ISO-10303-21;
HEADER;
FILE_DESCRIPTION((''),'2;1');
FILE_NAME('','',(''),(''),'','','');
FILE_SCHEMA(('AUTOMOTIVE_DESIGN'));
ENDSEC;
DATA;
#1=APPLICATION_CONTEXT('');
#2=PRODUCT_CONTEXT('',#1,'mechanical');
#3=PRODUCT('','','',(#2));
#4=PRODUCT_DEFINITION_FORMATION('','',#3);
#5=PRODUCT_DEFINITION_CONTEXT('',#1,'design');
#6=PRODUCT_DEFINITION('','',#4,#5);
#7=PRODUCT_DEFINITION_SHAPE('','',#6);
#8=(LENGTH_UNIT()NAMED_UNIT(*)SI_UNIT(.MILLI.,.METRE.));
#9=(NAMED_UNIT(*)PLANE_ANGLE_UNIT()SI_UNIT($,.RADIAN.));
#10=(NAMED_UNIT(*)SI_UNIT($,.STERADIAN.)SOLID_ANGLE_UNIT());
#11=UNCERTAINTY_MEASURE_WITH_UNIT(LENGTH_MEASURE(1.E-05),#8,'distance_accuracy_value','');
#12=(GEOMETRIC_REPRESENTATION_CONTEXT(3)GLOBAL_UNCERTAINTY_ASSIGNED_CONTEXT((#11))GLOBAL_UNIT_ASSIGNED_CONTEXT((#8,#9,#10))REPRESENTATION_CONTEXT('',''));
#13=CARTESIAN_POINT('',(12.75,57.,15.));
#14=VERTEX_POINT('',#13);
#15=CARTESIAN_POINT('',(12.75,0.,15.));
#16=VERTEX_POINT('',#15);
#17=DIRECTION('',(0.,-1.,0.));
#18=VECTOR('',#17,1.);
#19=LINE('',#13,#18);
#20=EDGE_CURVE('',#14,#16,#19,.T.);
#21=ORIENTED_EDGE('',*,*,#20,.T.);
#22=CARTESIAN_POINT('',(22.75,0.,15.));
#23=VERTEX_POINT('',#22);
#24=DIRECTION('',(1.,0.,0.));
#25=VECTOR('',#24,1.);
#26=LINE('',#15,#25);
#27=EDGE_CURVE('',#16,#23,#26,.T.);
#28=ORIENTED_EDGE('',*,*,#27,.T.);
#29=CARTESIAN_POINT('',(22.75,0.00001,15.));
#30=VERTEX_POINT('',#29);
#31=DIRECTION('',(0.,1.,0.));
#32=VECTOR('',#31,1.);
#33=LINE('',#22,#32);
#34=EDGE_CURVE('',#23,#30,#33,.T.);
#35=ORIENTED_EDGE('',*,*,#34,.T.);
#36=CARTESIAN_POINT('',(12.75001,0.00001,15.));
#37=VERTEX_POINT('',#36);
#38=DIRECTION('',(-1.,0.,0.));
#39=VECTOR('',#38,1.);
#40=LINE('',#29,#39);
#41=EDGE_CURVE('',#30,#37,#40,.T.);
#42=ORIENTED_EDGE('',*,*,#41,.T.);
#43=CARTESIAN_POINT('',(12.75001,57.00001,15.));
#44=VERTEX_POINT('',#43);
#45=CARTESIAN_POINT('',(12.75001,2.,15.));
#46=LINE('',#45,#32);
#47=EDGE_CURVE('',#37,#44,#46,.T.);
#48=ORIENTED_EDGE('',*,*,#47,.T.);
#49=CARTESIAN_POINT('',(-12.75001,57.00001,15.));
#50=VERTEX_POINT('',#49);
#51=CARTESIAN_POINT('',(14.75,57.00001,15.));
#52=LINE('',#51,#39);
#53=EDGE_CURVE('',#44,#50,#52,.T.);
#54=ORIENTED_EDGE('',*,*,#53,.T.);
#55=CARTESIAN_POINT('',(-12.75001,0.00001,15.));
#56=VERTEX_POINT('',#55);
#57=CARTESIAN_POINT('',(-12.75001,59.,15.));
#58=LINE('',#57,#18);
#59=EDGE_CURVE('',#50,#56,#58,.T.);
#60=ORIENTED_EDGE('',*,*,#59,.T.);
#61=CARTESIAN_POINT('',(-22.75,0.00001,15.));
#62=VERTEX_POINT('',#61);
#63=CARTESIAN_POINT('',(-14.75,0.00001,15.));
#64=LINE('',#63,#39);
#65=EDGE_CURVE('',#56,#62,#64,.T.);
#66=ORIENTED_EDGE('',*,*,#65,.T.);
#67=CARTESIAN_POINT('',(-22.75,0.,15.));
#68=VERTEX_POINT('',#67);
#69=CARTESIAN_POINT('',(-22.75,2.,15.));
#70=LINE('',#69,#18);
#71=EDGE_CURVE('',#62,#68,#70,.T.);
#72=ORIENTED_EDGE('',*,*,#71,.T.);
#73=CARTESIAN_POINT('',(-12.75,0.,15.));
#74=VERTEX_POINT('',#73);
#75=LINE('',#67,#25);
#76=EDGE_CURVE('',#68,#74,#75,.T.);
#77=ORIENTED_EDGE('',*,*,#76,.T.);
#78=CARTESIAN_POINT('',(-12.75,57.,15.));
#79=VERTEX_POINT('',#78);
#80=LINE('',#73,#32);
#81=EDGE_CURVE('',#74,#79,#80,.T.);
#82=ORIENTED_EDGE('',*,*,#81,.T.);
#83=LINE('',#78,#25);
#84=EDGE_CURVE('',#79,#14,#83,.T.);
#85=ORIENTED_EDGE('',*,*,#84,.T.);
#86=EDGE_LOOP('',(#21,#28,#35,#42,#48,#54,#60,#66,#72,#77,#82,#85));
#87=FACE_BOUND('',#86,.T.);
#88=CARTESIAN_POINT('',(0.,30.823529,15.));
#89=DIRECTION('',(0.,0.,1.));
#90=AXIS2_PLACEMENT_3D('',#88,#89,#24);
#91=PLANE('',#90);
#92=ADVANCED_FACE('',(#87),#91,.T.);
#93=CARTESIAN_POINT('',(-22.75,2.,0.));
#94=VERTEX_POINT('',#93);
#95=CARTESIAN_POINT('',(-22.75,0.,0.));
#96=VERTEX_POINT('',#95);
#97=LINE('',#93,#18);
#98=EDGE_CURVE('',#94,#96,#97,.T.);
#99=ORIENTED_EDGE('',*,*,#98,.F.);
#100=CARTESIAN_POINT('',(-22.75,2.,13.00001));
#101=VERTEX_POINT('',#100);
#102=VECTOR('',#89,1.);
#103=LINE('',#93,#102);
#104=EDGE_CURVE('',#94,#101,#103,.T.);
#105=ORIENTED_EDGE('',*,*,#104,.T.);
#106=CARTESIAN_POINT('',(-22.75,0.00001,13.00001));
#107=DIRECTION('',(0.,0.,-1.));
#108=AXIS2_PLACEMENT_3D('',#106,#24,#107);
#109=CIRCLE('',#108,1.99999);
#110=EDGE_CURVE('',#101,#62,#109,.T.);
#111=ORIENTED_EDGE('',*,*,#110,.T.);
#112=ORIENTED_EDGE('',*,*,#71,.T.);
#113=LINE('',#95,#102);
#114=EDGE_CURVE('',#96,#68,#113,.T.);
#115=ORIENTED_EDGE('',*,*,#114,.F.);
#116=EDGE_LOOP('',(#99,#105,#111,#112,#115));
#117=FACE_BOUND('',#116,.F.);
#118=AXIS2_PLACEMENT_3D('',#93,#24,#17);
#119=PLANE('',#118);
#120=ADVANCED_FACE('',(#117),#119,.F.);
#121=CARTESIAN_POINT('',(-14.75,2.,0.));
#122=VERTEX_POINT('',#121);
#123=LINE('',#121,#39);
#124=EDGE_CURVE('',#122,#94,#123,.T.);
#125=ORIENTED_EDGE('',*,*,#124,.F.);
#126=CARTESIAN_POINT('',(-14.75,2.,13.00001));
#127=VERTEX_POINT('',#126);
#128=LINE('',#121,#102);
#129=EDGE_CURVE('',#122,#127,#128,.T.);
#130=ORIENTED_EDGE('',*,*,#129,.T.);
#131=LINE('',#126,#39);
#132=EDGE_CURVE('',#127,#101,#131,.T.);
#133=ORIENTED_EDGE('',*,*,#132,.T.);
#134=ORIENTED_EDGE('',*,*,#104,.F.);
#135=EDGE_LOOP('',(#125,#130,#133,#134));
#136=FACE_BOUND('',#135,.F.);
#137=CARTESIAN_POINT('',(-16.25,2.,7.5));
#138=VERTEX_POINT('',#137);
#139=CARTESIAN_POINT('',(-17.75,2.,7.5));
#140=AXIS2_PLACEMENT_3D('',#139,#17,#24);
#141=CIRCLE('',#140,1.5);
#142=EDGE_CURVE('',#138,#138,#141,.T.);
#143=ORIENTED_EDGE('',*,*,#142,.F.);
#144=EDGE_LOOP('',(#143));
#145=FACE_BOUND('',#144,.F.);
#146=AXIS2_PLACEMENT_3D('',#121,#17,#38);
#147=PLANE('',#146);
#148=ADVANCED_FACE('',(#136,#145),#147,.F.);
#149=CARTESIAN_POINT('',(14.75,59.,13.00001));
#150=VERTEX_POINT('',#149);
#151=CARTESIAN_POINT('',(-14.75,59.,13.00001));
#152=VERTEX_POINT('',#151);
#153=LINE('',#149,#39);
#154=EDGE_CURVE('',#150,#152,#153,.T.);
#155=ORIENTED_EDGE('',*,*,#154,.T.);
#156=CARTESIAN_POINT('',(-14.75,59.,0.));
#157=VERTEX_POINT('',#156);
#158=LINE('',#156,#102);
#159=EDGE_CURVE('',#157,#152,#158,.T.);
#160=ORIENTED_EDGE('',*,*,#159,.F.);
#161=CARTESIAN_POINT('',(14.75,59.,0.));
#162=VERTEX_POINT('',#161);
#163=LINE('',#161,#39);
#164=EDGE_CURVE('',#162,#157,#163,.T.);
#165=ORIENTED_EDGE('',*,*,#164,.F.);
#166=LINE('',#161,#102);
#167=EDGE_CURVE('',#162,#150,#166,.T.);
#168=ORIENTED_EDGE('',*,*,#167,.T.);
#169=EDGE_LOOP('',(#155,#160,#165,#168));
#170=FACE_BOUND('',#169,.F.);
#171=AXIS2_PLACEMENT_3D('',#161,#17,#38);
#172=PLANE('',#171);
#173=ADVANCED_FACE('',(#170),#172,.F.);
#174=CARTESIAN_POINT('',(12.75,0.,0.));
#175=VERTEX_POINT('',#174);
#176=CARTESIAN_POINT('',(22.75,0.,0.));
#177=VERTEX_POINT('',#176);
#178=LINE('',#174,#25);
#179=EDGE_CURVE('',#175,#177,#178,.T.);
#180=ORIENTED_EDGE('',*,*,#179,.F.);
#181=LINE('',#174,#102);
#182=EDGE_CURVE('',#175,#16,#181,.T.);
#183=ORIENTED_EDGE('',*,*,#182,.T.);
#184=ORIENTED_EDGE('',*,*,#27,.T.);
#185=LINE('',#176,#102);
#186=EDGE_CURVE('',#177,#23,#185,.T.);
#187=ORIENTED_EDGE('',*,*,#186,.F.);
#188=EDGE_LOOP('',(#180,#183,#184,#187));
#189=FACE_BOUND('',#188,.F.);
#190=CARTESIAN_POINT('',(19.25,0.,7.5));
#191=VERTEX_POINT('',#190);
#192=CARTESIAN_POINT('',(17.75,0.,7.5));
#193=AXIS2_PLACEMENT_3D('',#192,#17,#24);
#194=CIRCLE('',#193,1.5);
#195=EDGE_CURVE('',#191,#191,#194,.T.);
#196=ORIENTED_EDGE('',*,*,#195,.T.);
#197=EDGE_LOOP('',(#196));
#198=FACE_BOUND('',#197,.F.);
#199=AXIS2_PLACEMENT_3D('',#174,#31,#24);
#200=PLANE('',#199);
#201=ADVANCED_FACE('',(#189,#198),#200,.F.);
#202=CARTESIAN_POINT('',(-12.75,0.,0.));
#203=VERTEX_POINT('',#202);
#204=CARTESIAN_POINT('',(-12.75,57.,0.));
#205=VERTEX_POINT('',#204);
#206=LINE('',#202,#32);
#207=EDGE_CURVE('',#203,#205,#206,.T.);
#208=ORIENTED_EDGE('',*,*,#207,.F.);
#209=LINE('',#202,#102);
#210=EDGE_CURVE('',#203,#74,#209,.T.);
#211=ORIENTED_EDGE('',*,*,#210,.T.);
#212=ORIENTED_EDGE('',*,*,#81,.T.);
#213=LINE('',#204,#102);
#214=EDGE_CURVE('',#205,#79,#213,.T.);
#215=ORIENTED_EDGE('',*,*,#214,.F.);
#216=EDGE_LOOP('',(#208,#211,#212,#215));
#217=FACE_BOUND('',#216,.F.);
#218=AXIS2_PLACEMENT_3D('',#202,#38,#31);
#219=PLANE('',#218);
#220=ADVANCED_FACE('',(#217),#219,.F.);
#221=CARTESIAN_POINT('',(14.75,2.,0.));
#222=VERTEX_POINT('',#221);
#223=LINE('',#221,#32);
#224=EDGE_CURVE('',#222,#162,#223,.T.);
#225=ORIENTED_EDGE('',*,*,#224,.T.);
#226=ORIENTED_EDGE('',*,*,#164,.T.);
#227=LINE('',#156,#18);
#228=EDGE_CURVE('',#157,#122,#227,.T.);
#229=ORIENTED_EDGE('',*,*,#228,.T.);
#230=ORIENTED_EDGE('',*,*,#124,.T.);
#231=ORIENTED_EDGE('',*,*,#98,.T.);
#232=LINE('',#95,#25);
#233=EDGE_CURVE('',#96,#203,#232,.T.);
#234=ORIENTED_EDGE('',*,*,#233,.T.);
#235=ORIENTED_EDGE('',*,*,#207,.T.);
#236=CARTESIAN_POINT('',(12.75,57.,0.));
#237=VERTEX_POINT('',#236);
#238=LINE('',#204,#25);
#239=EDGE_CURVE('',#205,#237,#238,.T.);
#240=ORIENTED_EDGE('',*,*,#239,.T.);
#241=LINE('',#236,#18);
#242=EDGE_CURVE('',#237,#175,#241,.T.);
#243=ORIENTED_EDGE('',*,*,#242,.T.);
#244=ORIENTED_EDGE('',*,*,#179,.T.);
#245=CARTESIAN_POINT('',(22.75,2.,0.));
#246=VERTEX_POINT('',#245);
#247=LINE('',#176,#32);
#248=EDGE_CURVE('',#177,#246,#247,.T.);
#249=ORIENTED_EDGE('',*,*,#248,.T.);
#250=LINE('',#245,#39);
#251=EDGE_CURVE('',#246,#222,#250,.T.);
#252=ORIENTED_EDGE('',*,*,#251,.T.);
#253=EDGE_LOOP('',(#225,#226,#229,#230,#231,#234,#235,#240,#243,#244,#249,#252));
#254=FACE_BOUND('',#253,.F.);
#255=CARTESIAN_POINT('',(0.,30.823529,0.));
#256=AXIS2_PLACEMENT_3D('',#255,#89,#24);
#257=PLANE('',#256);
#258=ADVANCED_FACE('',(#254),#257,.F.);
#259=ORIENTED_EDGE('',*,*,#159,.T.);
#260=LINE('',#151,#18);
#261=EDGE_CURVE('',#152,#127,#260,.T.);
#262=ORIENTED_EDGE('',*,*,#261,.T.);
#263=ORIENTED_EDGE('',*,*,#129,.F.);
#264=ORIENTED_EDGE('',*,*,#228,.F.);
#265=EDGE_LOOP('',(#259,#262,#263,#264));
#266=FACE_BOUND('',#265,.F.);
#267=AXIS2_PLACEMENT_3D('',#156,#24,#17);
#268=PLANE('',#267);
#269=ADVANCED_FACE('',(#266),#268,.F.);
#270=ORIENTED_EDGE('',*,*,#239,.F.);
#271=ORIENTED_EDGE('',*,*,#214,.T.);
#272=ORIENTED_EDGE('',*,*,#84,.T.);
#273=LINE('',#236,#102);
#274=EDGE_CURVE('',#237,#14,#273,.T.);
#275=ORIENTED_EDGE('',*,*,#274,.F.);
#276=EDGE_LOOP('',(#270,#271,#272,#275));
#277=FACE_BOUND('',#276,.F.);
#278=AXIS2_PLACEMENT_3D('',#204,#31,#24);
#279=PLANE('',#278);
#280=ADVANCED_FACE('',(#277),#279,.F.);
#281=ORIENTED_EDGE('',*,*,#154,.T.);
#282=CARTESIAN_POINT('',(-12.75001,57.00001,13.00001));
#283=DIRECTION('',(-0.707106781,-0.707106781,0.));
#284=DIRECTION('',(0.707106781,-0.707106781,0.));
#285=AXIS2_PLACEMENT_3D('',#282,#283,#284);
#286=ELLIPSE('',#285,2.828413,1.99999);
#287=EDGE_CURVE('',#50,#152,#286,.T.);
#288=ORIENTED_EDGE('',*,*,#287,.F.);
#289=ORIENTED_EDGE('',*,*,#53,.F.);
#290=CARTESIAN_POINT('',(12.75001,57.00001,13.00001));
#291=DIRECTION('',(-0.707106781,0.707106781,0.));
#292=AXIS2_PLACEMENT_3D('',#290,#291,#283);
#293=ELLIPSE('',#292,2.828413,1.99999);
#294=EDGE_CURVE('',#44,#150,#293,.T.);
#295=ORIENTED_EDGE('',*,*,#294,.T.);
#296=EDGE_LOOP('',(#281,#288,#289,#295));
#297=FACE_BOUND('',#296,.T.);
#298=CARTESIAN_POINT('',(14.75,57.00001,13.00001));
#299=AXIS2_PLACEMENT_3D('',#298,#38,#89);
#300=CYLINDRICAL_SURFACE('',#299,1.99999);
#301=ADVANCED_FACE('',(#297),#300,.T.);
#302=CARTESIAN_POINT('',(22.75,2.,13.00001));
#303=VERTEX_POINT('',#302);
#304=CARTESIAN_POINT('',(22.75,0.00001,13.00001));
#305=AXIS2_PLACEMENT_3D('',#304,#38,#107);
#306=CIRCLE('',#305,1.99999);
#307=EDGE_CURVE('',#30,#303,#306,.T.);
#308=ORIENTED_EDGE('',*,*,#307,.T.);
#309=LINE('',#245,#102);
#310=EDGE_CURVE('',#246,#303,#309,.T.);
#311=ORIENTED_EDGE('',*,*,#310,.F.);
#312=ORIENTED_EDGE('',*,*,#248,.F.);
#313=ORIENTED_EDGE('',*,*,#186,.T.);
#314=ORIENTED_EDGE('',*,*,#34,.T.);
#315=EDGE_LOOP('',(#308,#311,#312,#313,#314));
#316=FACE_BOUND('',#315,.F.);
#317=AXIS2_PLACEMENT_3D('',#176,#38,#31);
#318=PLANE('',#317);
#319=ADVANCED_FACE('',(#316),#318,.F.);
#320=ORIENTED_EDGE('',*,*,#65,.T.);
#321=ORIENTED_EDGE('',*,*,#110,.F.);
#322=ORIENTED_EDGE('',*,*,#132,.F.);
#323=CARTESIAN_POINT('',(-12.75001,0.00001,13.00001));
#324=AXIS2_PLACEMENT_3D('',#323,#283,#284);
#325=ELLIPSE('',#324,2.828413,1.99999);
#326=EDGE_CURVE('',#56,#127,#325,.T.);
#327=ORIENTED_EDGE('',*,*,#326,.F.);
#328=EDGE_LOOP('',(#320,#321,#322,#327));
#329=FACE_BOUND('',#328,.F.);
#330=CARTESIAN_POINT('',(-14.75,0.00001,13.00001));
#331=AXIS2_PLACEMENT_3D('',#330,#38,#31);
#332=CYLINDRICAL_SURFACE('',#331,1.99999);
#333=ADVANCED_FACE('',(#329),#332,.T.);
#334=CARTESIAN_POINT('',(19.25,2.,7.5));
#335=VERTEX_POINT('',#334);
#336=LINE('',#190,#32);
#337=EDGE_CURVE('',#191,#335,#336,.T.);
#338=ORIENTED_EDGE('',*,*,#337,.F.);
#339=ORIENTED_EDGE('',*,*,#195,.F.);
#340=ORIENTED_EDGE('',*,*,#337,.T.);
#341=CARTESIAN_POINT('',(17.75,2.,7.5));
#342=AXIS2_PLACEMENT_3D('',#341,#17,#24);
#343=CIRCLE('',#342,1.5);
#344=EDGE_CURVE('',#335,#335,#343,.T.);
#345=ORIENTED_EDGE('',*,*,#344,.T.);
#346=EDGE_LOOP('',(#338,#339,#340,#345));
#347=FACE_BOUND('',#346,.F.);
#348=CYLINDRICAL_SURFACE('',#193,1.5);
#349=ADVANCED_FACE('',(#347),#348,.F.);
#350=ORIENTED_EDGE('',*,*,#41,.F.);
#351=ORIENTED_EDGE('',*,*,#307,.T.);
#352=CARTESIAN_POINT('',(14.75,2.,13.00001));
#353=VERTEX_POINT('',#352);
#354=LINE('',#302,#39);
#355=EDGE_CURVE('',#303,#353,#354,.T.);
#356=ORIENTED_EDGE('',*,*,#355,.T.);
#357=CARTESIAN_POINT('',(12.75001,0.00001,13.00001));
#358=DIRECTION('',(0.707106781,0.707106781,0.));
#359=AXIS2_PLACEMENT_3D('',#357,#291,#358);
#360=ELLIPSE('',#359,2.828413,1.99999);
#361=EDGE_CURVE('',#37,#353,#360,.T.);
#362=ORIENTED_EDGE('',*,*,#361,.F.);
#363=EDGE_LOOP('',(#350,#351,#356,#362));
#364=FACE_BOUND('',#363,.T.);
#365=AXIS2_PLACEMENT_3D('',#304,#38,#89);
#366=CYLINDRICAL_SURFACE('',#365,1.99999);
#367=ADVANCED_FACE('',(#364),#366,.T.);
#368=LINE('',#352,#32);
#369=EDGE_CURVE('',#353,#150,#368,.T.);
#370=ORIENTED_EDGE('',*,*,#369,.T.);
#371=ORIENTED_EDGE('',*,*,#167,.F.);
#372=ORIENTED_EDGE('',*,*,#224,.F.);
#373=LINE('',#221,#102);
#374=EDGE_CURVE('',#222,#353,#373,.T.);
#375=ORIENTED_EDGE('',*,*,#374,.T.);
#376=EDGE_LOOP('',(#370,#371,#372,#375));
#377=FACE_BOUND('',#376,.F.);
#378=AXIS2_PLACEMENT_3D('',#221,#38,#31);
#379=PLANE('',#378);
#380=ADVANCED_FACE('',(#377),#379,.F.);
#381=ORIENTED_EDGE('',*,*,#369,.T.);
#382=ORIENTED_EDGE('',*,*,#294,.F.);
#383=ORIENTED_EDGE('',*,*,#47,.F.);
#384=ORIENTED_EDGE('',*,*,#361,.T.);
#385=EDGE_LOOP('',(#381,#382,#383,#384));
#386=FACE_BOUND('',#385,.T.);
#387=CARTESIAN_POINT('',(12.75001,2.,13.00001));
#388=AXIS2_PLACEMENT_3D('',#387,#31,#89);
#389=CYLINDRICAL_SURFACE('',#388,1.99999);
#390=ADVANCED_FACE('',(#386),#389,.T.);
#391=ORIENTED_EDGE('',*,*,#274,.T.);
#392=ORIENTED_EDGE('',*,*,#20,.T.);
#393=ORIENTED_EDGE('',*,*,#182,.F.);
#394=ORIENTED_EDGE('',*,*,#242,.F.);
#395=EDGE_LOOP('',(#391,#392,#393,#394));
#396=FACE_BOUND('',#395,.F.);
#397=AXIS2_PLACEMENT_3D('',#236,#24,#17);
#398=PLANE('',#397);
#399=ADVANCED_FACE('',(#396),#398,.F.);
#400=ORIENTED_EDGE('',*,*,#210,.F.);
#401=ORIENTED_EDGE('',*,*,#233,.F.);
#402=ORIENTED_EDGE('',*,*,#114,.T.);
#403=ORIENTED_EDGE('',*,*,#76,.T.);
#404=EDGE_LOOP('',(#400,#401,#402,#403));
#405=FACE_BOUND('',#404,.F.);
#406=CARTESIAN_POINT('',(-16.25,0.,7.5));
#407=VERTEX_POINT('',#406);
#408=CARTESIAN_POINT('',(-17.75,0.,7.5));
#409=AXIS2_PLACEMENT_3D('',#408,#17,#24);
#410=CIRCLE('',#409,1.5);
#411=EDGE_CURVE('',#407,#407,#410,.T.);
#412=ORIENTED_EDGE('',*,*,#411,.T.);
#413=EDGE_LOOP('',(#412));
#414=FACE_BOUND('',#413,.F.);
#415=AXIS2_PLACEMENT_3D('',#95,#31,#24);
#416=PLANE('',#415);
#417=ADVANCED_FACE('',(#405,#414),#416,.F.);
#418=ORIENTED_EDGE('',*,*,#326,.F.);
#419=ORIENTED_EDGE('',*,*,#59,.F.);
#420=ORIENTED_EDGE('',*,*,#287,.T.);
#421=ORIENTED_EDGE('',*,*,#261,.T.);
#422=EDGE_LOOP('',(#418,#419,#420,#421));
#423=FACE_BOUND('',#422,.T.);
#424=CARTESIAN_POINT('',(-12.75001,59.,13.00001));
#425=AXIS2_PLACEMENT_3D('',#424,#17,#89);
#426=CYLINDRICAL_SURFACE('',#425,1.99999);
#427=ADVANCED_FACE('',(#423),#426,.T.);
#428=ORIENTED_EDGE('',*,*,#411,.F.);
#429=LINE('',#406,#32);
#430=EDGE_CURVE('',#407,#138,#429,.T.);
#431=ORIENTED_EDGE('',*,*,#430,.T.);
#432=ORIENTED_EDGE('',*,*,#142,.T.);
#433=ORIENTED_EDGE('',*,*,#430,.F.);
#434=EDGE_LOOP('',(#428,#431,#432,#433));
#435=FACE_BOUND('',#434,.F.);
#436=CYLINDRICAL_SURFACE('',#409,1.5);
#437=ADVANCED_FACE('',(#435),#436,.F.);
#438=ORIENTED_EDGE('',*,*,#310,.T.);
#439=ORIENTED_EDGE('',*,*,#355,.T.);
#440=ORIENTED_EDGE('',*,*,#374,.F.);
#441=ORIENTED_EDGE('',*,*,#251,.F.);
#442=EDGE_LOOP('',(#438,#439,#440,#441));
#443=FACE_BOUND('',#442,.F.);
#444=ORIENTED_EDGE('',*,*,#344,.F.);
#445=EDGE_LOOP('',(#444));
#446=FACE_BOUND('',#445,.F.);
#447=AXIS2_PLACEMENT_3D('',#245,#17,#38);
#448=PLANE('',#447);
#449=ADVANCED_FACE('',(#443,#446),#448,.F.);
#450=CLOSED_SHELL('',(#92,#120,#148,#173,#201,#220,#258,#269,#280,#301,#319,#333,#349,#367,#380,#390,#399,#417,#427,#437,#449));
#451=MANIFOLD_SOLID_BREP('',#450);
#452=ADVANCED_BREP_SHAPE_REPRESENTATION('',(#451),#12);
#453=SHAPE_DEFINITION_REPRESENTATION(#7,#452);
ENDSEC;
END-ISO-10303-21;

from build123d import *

# Parameters (mm, degrees)
F1_DEPTH = 15
F2_R     = 1.5
F3_DEPTH = 2
F4_R     = 1.99999


# Not quite as in the source:
# - a fillet or chamfer is up to 0.001 mm smaller than in the source, because OpenCascade refuses the exact size


with BuildPart() as f1:
    # F0 (on Top) → F1 (new body)
    with BuildSketch(Plane.XY):
        Polygon((-22.75, 2), (-22.75, 0), (-12.75, 0), (-12.75, 57), (0, 57), (12.75, 57), (12.75, 0), (22.75, 0), (22.75, 2), (14.75, 2), (14.75, 59), (0, 59), (-14.75, 59), (-14.75, 2), align=None)
    extrude(amount=F1_DEPTH)

    # F2 (on Front) → F3 (cut)
    with BuildSketch(Plane.XZ):
        with Locations((-17.75, 7.5)):
            Circle(F2_R)
        with Locations((17.75, 7.5)):
            Circle(F2_R)
    extrude(amount=-F3_DEPTH, mode=Mode.SUBTRACT)

    # F4 (radius 2 in the source; OpenCascade refuses exactly that, so slightly less here)
    f4_edges = [f1.edges().sort_by_distance(p)[0] for p in [
        (-14.75, 30.5, 15),
        (0, 59, 15),
        (14.75, 30.5, 15),
        (18.75, 2, 15),
        (-18.75, 2, 15),
    ]]
    fillet(f4_edges, radius=F4_R)


solid = f1.part
